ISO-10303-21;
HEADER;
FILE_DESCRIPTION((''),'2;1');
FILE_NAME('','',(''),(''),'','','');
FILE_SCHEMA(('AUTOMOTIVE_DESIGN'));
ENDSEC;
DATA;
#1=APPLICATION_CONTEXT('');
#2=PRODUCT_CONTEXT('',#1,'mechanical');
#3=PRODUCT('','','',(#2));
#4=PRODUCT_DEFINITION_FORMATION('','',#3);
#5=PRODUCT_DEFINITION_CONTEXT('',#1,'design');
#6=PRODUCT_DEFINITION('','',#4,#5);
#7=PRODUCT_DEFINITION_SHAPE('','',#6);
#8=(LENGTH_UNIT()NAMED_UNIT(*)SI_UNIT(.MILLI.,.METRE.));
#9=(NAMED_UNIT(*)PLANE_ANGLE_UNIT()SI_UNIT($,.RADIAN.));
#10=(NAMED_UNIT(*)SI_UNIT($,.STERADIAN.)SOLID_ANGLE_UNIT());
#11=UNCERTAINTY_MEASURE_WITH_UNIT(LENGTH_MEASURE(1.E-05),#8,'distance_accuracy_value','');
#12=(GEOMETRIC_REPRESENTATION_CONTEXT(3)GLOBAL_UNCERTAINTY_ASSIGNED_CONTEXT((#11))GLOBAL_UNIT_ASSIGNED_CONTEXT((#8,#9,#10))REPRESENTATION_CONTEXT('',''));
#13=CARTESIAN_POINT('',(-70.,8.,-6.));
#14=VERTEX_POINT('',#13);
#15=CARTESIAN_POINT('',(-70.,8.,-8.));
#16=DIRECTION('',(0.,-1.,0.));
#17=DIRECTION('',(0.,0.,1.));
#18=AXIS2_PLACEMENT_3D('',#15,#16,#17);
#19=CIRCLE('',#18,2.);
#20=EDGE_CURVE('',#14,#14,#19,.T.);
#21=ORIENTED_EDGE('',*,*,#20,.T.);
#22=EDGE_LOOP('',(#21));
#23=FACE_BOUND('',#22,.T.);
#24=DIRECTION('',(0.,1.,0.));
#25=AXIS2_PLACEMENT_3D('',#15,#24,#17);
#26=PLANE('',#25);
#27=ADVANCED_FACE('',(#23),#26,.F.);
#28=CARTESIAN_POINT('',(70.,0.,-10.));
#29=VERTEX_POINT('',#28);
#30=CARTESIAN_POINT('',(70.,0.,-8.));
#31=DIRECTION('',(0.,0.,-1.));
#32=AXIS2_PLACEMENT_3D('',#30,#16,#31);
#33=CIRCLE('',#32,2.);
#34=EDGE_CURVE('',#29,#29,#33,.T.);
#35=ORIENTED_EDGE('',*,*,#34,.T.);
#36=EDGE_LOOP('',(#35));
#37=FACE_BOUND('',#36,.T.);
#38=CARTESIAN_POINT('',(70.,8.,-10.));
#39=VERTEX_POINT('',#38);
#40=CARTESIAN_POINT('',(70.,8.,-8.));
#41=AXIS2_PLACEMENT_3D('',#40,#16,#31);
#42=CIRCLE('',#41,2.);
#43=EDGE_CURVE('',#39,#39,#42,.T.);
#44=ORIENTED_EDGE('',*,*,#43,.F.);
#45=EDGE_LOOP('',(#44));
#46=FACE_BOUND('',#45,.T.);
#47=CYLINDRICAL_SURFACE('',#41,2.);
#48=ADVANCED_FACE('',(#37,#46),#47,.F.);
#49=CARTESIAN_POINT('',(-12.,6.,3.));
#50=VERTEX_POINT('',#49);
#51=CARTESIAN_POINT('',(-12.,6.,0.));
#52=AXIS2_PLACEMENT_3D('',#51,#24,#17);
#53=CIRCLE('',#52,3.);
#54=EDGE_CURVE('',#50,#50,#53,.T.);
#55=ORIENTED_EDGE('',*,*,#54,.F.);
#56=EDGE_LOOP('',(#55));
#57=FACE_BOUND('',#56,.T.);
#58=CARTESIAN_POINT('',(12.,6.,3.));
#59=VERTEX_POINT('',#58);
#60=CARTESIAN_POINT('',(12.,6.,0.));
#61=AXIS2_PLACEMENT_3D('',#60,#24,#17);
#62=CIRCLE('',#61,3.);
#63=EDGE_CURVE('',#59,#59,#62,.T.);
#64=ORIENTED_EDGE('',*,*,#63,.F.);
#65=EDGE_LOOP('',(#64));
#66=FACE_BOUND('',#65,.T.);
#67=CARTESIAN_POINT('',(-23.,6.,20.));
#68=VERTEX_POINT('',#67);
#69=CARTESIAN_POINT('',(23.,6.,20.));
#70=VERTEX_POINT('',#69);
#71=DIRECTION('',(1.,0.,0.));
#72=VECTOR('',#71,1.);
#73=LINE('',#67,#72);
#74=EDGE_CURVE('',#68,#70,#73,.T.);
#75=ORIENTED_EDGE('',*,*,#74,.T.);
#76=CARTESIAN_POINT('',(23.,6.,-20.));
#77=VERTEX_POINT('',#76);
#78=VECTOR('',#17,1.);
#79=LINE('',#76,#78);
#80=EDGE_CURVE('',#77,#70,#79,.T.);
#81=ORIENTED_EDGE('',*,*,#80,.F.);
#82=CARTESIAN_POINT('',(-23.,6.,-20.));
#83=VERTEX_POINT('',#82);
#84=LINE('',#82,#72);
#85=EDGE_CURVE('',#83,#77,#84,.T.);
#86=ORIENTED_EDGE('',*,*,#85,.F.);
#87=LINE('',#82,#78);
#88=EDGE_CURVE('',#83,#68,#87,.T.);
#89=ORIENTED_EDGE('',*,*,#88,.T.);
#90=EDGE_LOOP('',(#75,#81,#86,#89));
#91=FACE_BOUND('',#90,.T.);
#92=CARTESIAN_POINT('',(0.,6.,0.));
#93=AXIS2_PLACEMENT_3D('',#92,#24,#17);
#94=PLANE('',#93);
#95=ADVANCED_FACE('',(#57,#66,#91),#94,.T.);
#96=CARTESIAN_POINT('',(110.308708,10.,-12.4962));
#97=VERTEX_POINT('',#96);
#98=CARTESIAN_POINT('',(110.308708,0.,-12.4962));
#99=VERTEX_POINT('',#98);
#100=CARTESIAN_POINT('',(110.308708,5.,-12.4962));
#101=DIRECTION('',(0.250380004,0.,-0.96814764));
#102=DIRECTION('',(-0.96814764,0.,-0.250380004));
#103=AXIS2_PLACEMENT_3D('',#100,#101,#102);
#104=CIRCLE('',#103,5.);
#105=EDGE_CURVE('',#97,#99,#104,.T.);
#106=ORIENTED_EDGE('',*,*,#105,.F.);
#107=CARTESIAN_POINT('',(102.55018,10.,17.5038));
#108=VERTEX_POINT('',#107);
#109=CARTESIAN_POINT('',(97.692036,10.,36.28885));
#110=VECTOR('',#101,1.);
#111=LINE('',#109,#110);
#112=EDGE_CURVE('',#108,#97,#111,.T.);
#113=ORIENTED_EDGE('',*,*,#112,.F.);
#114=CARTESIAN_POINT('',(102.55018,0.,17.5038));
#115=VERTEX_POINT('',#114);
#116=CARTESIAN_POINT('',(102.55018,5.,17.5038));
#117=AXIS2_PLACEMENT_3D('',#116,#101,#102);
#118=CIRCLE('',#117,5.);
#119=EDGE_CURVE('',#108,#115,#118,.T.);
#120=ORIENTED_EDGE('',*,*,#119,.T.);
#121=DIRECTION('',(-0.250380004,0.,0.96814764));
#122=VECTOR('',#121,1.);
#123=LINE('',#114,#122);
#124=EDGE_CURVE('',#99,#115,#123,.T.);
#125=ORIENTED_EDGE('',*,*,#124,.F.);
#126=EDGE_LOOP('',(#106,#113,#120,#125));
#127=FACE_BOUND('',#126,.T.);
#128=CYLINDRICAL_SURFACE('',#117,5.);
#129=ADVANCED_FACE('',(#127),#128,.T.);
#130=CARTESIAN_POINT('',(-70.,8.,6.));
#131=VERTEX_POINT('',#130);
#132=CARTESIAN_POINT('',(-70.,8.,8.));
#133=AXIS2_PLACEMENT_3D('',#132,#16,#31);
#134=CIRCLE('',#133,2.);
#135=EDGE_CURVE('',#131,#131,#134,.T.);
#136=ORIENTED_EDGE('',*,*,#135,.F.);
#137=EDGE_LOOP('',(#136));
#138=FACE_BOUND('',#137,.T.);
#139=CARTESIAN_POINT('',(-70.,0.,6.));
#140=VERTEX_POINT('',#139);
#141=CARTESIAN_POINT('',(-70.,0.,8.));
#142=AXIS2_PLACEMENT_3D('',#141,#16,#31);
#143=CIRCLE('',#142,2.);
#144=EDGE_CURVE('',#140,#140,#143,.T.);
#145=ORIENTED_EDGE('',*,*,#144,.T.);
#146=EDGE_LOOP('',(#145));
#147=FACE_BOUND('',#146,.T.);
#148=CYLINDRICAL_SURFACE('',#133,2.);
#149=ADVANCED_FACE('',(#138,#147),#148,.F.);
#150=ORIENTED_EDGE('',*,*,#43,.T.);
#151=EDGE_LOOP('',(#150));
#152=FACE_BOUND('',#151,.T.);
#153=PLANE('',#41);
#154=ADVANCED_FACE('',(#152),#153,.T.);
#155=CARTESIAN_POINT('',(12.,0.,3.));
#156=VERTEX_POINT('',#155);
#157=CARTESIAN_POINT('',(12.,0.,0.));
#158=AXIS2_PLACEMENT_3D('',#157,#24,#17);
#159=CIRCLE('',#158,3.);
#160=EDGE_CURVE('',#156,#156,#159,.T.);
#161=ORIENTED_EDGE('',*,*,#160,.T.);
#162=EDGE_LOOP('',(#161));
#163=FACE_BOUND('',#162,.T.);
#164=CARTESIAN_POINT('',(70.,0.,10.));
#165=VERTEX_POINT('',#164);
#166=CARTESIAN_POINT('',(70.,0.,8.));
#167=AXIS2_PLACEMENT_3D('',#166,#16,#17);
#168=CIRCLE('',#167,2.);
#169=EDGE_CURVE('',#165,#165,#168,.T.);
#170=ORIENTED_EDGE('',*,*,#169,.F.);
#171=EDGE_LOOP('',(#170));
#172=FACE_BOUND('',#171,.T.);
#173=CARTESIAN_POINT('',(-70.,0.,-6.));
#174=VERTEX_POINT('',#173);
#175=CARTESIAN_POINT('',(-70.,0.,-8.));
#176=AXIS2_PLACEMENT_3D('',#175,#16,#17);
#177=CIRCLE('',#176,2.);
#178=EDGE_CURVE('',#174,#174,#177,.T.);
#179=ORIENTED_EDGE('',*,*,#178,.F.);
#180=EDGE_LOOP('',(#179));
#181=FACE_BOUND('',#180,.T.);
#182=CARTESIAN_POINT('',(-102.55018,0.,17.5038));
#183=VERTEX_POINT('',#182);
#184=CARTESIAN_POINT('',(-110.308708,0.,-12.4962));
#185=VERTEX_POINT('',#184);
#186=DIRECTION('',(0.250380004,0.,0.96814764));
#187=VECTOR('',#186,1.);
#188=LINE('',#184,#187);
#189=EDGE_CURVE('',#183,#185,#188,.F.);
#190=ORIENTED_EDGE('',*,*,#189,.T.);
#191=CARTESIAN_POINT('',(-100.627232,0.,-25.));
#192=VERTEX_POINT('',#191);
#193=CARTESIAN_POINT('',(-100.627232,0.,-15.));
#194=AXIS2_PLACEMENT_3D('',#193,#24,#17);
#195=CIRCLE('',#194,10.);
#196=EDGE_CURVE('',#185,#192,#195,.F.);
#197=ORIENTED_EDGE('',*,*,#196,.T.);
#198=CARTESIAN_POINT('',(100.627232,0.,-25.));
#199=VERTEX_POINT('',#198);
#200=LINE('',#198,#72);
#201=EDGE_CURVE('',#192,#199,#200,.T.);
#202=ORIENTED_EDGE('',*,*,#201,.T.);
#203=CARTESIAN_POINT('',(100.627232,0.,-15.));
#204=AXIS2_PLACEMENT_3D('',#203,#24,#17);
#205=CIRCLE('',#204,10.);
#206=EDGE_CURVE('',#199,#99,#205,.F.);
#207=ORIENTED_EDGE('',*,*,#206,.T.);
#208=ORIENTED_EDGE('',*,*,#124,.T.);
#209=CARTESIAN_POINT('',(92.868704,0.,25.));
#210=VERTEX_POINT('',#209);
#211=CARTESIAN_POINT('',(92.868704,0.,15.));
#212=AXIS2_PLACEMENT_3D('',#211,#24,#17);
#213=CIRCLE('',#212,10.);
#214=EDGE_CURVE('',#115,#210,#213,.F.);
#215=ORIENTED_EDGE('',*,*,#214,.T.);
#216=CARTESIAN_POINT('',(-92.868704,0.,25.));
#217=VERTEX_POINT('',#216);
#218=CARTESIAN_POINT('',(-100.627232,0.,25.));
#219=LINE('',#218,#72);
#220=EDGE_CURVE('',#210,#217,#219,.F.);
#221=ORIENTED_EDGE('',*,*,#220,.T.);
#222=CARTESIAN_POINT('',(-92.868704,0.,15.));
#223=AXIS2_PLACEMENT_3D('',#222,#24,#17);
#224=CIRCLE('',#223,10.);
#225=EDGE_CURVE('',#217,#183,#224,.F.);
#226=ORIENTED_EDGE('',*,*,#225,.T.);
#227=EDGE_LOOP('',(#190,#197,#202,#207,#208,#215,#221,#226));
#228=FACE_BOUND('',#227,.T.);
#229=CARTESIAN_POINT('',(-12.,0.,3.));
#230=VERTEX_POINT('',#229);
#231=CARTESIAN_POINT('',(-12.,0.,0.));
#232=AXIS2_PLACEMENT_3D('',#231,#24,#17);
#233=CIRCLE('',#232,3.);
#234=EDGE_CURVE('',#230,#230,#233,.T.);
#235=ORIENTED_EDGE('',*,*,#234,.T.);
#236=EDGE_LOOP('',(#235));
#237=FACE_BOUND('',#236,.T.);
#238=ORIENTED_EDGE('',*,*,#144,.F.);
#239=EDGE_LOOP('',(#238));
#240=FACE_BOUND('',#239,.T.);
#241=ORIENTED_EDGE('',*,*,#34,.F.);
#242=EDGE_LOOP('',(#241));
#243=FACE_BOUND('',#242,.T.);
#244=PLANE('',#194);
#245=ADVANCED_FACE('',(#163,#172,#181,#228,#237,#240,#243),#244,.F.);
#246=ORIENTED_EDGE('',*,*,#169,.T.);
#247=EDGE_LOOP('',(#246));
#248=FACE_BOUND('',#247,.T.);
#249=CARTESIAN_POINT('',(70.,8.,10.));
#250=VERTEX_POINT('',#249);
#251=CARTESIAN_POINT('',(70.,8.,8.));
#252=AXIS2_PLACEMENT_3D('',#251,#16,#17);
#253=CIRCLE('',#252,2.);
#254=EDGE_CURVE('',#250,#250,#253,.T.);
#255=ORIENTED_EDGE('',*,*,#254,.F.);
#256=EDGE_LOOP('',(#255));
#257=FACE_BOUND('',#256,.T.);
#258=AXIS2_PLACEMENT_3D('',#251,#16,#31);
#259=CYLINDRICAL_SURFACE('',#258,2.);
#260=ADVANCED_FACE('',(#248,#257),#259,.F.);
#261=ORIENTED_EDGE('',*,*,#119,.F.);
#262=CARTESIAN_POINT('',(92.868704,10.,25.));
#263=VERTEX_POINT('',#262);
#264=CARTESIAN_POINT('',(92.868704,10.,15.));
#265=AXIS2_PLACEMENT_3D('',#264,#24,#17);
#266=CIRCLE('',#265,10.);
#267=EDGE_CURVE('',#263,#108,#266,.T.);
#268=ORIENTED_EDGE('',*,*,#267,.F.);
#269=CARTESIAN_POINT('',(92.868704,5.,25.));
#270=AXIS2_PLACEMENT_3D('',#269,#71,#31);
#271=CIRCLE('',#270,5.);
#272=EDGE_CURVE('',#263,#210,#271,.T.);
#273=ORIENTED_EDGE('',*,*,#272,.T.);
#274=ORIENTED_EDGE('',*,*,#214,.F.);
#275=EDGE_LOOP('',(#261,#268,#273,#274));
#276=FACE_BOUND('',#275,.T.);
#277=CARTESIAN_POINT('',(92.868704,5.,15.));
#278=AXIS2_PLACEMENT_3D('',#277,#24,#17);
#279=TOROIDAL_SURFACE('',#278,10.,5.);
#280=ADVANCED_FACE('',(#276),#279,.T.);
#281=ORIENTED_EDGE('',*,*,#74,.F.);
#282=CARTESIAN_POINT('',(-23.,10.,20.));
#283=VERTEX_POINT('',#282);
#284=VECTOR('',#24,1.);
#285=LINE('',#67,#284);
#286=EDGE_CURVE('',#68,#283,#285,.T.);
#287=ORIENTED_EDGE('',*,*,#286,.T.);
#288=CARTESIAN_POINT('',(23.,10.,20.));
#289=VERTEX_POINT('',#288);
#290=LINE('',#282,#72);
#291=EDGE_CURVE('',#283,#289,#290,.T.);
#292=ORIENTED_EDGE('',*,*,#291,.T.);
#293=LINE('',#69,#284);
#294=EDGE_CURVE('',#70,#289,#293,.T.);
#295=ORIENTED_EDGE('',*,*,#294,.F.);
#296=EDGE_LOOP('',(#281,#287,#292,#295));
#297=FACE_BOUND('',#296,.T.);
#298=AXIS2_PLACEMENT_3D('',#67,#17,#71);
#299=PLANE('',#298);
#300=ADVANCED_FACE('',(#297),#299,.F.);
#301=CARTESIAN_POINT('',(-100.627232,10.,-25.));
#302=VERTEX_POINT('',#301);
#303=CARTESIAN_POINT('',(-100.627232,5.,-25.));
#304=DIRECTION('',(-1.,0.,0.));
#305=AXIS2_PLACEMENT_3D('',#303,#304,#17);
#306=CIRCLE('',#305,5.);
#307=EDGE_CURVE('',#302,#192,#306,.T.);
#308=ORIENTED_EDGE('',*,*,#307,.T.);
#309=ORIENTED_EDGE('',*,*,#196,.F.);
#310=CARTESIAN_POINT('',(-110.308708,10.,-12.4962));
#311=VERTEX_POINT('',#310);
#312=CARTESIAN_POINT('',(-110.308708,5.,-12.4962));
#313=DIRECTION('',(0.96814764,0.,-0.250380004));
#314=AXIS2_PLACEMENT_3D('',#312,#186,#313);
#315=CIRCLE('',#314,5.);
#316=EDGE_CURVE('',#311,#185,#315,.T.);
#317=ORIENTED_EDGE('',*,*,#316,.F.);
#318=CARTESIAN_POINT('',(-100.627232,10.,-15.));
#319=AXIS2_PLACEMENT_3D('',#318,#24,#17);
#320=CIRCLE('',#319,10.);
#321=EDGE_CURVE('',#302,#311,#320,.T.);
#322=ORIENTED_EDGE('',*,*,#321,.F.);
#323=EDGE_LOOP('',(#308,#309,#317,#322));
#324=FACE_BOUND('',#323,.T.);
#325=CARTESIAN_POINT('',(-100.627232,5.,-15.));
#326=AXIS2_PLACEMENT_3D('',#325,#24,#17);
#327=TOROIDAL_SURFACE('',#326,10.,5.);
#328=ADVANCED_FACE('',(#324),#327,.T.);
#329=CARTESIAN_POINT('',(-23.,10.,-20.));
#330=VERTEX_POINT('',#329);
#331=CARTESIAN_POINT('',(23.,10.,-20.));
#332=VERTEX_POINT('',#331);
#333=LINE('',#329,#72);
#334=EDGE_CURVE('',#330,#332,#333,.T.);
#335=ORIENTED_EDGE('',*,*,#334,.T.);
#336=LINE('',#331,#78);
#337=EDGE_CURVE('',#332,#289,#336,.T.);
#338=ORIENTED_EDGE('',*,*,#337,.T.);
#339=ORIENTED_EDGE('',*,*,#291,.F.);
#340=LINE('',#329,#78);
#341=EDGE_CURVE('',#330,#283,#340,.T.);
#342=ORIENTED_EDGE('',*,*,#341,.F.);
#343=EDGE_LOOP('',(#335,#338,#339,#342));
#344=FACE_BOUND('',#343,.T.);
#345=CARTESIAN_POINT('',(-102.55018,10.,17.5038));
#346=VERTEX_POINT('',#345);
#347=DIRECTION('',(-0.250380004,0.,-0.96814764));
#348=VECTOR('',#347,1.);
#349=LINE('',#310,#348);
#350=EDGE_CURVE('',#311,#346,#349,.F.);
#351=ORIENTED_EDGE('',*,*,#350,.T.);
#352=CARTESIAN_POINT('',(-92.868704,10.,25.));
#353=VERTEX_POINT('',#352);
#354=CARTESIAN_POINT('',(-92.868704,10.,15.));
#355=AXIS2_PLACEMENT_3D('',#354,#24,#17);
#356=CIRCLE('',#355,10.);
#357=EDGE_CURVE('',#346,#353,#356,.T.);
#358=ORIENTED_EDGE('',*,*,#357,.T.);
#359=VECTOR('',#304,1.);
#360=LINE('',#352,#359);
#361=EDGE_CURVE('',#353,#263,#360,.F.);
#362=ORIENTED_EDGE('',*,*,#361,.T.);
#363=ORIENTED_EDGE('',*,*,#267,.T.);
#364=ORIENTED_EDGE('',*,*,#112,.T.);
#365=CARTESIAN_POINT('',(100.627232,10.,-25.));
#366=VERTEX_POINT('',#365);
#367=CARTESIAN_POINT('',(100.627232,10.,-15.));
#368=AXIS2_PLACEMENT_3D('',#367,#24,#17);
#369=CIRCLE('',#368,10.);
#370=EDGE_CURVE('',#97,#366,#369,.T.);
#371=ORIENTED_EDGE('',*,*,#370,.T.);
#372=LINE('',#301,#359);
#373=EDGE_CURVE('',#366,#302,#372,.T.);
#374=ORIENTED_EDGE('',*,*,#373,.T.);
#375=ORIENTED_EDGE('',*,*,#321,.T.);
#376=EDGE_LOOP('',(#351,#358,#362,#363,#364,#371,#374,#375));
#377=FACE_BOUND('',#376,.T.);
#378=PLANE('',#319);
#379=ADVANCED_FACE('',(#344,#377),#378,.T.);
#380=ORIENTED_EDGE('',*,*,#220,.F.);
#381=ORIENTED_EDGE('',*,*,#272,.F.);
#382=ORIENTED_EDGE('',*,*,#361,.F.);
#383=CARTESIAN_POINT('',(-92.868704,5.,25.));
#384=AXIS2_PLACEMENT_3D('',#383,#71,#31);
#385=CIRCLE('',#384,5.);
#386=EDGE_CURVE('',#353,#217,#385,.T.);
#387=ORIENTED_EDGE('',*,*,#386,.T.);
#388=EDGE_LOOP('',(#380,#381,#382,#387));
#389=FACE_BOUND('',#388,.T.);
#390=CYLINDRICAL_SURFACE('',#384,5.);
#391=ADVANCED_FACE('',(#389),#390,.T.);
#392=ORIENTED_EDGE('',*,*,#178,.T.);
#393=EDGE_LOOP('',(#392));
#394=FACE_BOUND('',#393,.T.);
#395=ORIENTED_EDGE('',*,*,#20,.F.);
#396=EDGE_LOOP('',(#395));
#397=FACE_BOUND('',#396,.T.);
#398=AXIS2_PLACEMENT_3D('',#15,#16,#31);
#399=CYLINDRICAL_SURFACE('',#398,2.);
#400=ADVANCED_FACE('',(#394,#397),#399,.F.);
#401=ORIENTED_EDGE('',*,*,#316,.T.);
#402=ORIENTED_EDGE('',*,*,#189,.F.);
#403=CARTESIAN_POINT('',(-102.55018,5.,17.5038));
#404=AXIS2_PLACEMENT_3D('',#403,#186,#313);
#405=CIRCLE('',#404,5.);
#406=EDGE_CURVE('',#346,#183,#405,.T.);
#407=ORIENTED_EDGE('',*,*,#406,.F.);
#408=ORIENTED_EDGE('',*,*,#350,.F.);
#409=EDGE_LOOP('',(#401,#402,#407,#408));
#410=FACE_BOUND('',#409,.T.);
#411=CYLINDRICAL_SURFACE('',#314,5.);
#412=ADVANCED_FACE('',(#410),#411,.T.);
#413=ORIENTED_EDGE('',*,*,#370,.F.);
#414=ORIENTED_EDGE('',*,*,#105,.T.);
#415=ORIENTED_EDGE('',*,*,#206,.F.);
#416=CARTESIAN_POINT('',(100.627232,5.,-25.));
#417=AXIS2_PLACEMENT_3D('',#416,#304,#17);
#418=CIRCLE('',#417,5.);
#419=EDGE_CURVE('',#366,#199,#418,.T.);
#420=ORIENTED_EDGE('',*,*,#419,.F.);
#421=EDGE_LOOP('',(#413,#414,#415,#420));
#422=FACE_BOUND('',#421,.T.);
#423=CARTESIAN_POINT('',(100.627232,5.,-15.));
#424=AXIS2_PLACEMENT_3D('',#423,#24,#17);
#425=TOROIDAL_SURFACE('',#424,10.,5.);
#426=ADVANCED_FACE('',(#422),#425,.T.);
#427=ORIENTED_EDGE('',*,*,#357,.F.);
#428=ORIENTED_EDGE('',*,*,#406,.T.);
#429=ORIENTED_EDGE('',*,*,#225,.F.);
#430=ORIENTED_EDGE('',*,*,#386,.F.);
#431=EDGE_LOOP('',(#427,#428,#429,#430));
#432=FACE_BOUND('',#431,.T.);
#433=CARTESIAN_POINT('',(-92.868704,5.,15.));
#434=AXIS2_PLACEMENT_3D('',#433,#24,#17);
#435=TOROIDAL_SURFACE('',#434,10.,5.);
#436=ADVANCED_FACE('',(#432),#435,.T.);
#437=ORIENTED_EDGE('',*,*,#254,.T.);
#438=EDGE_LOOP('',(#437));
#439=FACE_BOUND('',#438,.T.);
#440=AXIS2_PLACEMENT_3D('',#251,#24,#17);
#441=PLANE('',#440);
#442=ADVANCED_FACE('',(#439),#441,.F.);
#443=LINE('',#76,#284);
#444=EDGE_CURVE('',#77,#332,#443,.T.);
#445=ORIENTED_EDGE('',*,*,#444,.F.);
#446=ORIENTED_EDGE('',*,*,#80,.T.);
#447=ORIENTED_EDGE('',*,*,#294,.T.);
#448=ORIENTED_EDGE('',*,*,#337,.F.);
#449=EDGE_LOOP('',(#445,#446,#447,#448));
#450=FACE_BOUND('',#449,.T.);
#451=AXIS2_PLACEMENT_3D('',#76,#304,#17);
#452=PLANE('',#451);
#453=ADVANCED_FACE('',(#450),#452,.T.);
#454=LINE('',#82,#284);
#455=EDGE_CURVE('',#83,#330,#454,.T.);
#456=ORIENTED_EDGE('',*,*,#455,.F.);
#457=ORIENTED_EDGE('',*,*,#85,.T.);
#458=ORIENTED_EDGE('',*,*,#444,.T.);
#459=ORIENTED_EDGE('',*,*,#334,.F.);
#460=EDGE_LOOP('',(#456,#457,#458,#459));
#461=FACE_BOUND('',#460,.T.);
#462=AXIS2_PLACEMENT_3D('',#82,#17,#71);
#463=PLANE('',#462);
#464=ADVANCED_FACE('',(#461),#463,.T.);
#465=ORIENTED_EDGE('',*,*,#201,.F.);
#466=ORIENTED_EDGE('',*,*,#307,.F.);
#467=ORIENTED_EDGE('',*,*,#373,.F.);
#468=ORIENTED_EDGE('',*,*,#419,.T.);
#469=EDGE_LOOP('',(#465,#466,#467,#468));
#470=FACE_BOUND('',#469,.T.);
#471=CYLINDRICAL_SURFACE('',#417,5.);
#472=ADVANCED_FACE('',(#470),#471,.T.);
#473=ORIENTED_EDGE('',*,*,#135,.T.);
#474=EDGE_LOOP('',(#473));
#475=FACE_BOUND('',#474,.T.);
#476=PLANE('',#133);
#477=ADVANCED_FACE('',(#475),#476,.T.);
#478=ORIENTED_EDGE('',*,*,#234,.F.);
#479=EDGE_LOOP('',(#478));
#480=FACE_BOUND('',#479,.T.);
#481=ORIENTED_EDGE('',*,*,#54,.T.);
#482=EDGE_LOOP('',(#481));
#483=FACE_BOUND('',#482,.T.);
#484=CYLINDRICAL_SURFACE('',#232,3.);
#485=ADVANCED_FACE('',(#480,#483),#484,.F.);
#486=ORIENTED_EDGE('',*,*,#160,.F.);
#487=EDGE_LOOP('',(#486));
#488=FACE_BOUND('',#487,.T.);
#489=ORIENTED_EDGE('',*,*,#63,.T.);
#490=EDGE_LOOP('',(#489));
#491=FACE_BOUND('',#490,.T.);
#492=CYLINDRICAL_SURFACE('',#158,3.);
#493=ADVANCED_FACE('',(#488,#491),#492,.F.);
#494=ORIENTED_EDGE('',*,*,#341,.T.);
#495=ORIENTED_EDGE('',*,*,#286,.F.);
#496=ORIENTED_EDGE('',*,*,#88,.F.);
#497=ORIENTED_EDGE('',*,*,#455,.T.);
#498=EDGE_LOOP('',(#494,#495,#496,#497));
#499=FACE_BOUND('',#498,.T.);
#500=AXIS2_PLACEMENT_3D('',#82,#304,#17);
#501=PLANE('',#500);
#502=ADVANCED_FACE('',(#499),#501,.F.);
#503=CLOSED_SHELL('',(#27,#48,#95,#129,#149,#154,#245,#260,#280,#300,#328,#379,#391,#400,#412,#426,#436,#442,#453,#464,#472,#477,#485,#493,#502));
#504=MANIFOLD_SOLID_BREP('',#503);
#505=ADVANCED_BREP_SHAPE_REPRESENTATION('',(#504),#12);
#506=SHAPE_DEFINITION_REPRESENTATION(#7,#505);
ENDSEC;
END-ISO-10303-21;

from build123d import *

# Parameters (mm, degrees)
BOSS_EXTRUDE1_DEPTH = 10
SKETCH2_W           = 46
SKETCH2_H           = 40
CUT_EXTRUDE1_DEPTH  = 4
SKETCH2_3_R         = 3
CUT_EXTRUDE2_DEPTH  = 120.873502812
FILLET1_R           = 5
SKETCH3_R           = 2
CUT_EXTRUDE3_DEPTH  = 8


with BuildPart() as part:
    # Sketch1 → Boss-Extrude1 (new body)
    with BuildSketch(Plane(origin=(0, 0, 0), x_dir=(1, 0, 0), z_dir=(0, 1, 0))):
        with BuildLine():
            Line((115.149446157, 11.244299939), (107.390918627, -18.755700061))
            ThreePointArc((107.390918627, -18.755700061), (102.051963222, -26.860343606), (92.868704021, -30))
            Line((92.868704021, -30), (-92.868704021, -30))
            ThreePointArc((-92.868704021, -30), (-102.051963222, -26.860343606), (-107.390918627, -18.755700061))
            Line((-107.390918627, -18.755700061), (-115.149446157, 11.244299939))
            ThreePointArc((-115.149446157, 11.244299939), (-112.487575158, 24.183259201), (-100.627231552, 30))
            Line((-100.627231552, 30), (100.627231552, 30))
            ThreePointArc((100.627231552, 30), (112.487575158, 24.183259201), (115.149446157, 11.244299939))
        make_face()
    extrude(amount=BOSS_EXTRUDE1_DEPTH)

    # Sketch2 → Cut-Extrude1 (cut)
    with BuildSketch(Plane(origin=(0, 10, 0), x_dir=(1, 0, 0), z_dir=(0, 1, 0))):
        Rectangle(SKETCH2_W, SKETCH2_H)
    extrude(amount=-CUT_EXTRUDE1_DEPTH, mode=Mode.SUBTRACT)

    # Sketch2<3> → Cut-Extrude2 (cut, through all)
    with BuildSketch(Plane(origin=(0, 10, 0), x_dir=(1, 0, 0), z_dir=(0, 1, 0))):
        with Locations(Location((-12, 0, 0), (0, 0, 270))):
            Circle(SKETCH2_3_R)
        with Locations(Location((12, 0, 0), (0, 0, 270))):
            Circle(SKETCH2_3_R)
    extrude(amount=-CUT_EXTRUDE2_DEPTH, mode=Mode.SUBTRACT)

    # Fillet1
    fillet1_edges = [part.edges().sort_by_distance(p)[0] for p in [
        (0, 0, 30),
        (-102.051963222, 0, 26.860343606),
        (-111.270182392, 0, 3.755700061),
        (-112.487575158, 0, -24.183259201),
        (0, 10, 30),
        (102.051963222, 10, 26.860343606),
        (111.270182392, 10, 3.755700061),
        (112.487575158, 10, -24.183259201),
        (0, 10, -30),
        (0, 0, -30),
        (-111.270182392, 10, 3.755700061),
        (111.270182392, 0, 3.755700061),
    ]]
    fillet(fillet1_edges, radius=FILLET1_R - 0.0001)  # a hair under: the kernel refuses the full size

    # Sketch3 → Cut-Extrude3 (cut)
    with BuildSketch(Plane.XZ):
        with Locations(Location((-70, 8, 0), (0, 0, 270))):
            Circle(SKETCH3_R)
        with Locations(Location((-70, -8, 0), (0, 0, 90))):
            Circle(SKETCH3_R)
        with Locations(Location((70, -8, 0), (0, 0, 270))):
            Circle(SKETCH3_R)
        with Locations(Location((70, 8, 0), (0, 0, 90))):
            Circle(SKETCH3_R)
    extrude(amount=-CUT_EXTRUDE3_DEPTH, mode=Mode.SUBTRACT)


solid = part.part
